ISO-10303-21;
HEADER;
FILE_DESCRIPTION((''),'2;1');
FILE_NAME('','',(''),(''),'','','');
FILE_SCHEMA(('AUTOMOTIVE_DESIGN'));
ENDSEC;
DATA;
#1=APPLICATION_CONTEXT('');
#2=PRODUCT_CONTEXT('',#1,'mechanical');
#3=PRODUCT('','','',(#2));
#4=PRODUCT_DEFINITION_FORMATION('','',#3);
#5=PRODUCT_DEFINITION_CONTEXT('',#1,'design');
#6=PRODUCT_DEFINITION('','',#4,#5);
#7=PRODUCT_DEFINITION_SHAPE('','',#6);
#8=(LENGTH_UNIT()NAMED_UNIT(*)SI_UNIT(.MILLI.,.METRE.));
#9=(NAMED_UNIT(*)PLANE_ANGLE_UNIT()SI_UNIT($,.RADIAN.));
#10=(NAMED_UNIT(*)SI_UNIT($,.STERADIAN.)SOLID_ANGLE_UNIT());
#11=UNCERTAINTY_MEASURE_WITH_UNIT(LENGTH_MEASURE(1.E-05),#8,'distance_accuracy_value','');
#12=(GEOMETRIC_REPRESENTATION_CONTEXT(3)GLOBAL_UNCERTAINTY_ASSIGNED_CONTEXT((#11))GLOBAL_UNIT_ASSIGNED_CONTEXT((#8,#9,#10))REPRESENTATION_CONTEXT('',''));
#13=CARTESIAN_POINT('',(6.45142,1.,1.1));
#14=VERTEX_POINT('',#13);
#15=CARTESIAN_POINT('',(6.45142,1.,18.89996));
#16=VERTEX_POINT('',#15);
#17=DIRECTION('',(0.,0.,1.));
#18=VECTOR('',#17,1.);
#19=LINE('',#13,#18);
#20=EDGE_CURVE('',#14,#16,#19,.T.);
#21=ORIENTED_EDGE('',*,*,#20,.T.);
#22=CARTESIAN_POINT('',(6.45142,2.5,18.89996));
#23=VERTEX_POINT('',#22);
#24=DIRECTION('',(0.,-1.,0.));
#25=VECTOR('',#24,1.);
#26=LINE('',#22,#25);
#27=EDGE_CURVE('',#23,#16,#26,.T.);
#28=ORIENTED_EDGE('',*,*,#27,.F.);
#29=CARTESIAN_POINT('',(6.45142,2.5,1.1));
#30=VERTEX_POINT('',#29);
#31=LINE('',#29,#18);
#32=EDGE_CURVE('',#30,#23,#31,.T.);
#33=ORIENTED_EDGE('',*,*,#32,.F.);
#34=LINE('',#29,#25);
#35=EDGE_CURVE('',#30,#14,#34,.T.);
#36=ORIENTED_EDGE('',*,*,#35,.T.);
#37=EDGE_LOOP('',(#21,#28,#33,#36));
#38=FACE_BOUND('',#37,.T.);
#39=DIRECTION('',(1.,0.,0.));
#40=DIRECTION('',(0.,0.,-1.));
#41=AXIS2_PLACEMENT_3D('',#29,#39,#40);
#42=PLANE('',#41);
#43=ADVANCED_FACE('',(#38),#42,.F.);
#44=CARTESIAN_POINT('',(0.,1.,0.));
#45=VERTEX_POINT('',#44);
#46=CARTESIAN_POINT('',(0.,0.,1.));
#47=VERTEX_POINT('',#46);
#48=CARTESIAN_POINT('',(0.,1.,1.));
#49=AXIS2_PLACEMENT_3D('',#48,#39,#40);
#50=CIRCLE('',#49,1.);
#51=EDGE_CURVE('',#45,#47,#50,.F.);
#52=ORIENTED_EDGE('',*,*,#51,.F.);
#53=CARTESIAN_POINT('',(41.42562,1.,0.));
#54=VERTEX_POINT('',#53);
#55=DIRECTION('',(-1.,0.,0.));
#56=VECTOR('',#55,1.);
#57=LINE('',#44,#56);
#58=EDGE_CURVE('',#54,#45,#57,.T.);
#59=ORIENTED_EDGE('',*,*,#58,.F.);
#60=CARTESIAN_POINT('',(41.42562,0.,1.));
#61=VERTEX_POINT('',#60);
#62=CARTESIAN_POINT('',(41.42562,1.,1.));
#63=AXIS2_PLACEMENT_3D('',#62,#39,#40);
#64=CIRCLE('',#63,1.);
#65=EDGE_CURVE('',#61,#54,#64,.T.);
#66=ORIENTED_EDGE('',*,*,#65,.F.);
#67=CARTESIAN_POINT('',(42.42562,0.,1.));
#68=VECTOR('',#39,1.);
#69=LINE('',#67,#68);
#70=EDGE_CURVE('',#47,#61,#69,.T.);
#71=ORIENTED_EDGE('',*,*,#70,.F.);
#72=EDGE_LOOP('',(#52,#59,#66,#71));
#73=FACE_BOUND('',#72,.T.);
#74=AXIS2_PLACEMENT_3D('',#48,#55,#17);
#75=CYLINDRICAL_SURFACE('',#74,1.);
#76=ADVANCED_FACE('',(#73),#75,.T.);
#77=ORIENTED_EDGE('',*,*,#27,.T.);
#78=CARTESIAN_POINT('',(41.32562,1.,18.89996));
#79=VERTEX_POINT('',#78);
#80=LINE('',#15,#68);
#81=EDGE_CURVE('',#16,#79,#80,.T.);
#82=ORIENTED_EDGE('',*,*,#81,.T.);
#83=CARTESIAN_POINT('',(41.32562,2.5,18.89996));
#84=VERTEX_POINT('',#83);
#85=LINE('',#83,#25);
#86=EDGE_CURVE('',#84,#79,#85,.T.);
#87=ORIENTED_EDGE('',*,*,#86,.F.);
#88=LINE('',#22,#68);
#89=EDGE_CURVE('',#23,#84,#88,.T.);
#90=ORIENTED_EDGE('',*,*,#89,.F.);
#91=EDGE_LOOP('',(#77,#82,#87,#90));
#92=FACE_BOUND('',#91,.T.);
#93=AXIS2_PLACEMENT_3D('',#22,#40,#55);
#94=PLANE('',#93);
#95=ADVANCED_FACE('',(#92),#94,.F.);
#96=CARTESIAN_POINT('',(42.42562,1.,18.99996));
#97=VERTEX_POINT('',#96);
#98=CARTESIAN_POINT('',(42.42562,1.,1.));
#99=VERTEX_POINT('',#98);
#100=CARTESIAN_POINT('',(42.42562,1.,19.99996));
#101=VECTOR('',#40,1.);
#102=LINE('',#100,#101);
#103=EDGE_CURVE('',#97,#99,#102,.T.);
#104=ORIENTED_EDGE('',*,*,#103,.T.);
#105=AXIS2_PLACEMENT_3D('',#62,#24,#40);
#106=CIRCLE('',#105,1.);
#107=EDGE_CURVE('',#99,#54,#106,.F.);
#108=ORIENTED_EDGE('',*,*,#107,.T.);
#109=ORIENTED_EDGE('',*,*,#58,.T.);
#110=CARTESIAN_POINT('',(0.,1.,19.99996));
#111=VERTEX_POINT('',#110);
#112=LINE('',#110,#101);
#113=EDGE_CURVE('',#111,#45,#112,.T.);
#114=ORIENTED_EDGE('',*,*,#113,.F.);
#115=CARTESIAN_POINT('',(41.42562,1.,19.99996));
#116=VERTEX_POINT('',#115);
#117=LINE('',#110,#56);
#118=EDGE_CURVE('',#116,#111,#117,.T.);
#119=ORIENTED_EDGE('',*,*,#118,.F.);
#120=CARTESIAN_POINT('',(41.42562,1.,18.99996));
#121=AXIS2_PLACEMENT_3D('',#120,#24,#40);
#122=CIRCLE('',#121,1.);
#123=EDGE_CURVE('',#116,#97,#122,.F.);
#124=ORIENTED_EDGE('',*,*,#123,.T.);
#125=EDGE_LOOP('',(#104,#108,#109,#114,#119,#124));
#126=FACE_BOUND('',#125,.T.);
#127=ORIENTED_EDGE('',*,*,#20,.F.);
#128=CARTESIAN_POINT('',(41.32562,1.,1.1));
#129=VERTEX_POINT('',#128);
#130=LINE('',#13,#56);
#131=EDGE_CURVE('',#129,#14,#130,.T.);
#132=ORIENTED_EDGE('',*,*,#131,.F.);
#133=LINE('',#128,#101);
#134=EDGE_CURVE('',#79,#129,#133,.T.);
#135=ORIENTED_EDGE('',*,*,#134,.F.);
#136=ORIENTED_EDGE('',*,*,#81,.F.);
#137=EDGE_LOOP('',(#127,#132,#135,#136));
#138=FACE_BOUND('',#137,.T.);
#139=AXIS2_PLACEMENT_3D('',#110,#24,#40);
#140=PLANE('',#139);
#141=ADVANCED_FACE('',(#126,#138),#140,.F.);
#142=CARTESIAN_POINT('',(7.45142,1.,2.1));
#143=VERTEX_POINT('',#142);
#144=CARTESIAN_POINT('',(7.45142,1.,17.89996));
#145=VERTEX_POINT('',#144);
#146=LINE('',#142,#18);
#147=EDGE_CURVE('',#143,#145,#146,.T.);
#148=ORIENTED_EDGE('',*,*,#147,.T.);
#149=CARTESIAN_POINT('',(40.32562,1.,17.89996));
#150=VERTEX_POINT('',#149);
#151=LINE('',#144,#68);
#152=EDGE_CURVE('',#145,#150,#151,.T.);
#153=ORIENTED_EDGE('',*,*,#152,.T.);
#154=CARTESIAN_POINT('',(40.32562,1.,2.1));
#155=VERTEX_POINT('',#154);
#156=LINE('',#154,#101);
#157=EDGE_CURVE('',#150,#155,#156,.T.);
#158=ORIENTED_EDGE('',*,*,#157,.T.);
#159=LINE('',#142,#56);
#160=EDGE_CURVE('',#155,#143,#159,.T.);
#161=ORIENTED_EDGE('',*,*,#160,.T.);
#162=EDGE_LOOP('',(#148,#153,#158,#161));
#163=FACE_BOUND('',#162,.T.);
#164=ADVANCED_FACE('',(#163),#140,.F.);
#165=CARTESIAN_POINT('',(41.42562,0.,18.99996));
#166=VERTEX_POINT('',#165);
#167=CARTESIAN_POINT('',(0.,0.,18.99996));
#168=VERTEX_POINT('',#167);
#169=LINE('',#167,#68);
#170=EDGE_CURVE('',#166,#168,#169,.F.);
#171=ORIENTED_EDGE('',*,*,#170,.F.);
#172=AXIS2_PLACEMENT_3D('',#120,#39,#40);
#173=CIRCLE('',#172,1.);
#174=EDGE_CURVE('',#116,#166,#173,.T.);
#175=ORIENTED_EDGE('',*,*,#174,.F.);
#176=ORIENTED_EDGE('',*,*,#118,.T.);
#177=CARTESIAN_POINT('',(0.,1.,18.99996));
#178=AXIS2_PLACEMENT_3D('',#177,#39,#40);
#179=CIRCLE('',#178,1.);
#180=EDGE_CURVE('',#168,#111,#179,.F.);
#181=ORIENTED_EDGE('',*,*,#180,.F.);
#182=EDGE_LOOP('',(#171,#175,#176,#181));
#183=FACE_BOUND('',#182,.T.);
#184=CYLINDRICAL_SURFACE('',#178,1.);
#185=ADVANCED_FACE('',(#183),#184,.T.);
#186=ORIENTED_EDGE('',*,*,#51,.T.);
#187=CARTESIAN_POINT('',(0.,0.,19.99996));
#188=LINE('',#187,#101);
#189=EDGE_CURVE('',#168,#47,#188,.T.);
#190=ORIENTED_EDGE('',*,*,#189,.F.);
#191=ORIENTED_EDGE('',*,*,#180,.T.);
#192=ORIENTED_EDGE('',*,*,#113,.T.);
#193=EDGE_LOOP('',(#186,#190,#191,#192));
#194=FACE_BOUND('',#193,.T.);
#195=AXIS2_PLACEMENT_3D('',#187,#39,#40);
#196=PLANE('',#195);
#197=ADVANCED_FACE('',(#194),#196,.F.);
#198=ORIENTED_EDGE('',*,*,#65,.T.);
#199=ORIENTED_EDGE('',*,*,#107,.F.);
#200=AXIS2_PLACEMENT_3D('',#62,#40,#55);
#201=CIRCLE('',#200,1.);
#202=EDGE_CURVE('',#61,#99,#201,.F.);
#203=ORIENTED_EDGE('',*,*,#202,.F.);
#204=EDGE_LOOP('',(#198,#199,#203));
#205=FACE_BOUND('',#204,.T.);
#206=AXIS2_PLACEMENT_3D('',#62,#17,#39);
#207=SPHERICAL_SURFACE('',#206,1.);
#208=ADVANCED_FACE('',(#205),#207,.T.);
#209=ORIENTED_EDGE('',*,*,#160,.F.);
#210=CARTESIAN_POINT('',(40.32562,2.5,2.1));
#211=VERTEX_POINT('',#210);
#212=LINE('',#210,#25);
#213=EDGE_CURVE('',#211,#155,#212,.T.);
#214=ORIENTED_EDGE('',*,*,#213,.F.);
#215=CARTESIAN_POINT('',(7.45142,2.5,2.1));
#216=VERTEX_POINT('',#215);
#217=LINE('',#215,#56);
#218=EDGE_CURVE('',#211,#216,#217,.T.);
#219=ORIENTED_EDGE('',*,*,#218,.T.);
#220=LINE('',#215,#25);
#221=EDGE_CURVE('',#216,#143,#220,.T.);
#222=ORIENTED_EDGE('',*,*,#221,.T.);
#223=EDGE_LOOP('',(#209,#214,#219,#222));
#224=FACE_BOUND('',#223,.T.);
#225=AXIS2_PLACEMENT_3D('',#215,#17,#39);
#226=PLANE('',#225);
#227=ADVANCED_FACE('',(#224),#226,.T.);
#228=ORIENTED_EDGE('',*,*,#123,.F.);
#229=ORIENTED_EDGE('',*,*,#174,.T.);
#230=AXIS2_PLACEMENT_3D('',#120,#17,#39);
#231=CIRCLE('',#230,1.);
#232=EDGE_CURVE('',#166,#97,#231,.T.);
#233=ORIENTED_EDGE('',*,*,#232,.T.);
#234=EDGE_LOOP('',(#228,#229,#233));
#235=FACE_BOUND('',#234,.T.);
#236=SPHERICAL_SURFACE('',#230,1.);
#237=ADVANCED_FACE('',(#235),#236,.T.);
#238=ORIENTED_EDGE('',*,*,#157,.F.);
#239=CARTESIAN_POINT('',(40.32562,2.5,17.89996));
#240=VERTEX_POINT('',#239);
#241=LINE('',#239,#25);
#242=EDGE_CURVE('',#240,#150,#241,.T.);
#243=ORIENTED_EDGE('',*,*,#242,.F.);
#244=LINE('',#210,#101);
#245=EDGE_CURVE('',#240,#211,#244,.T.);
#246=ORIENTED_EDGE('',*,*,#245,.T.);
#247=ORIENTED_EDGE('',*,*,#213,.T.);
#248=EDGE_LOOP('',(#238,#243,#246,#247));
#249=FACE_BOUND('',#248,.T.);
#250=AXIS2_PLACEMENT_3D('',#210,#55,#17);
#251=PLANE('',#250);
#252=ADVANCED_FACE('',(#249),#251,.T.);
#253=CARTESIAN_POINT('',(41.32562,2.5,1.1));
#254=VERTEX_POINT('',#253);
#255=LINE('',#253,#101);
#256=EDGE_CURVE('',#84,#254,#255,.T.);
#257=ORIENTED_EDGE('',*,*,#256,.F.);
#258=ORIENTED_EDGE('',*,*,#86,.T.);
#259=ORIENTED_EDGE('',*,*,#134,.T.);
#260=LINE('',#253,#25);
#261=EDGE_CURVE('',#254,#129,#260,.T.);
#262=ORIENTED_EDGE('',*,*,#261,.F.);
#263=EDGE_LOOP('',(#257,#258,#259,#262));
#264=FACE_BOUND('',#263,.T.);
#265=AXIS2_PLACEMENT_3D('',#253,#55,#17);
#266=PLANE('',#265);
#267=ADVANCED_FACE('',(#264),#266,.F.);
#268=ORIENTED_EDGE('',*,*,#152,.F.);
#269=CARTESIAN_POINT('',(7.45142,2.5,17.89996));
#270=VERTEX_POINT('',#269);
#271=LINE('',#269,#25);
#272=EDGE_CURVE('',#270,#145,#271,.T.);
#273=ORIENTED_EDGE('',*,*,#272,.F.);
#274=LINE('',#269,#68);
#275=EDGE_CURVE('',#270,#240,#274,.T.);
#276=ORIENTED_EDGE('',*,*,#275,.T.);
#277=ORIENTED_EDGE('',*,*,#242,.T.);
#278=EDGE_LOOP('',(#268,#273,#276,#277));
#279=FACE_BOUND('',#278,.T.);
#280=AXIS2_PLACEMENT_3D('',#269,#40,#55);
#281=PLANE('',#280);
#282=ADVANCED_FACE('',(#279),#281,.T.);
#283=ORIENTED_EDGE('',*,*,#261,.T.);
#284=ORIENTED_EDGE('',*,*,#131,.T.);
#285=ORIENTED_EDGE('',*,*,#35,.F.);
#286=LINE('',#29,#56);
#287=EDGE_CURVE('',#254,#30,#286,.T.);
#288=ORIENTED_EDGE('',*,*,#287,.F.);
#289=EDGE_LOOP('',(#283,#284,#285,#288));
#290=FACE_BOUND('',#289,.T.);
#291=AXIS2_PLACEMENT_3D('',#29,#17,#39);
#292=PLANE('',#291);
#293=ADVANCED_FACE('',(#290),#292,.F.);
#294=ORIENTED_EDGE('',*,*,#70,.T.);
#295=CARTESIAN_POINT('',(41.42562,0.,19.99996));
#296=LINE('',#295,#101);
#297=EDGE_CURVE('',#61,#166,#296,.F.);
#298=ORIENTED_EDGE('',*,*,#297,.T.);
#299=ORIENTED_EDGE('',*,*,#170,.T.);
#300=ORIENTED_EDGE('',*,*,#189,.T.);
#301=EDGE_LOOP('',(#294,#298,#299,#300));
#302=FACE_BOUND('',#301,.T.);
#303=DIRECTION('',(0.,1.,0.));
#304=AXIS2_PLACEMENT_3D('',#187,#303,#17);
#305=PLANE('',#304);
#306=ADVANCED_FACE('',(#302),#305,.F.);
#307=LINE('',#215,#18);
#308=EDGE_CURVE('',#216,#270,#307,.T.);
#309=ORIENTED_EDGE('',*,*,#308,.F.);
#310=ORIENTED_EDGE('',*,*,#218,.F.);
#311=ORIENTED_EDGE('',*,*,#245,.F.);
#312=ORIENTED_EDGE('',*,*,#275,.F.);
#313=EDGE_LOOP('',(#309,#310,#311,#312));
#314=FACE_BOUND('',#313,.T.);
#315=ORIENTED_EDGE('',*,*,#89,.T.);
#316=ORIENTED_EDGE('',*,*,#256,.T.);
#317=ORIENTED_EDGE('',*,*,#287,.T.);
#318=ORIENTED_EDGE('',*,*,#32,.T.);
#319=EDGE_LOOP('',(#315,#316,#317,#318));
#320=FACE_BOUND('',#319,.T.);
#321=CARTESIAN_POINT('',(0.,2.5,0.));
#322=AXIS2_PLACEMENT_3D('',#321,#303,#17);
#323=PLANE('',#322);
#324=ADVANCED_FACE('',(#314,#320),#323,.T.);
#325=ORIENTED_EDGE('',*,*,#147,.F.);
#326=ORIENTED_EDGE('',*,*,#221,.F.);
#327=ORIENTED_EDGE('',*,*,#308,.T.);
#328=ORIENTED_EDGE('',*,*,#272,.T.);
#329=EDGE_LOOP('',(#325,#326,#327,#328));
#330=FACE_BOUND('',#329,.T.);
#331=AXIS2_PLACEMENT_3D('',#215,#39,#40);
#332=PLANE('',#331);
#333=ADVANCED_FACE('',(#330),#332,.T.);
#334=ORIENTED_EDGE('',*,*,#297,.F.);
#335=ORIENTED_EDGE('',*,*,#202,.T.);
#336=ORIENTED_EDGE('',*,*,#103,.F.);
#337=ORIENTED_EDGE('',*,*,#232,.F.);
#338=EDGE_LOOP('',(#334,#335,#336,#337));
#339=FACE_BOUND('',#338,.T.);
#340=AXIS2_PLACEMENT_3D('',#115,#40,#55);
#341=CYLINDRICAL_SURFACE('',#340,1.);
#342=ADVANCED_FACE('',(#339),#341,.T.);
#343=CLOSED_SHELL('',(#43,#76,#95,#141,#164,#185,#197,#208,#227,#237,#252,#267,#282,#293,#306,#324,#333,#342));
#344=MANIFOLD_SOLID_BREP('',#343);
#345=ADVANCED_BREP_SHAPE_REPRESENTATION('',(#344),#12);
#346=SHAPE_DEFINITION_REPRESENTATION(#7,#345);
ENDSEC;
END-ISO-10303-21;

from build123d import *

# Parameters (mm, degrees)
SKETCH1_W           = 42.42562
SKETCH1_H           = 1
BOSS_EXTRUDE1_DEPTH = 19.99996
FILLET1_R           = 1
SKETCH2_W           = 34.8742
SKETCH2_H           = 17.79996
SKETCH2_W_2         = 32.8742
SKETCH2_H_2         = 15.79996
BOSS_EXTRUDE2_DEPTH = 1.5


with BuildPart() as part:
    # Sketch1 → Boss-Extrude1 (new body)
    with BuildSketch(Plane.XY):
        with Locations((21.21281, 0.5)):
            Rectangle(SKETCH1_W, SKETCH1_H)
    extrude(amount=BOSS_EXTRUDE1_DEPTH)

    # Fillet1
    # the kernel refuses this fillet: 1 mm, written as the material it takes off along each edge
    with BuildSketch(Plane(origin=(41.42562, 1, 18.99996), x_dir=(1, 0, 0), z_dir=(0, -1, 0))) as fillet1_piece_1_section:
        Polygon((0, 0), (FILLET1_R * 1.02, 0), (FILLET1_R * 1.02, FILLET1_R * 1.02), (0, FILLET1_R * 1.02), align=None)
    fillet1_piece_1 = extrude(amount=FILLET1_R * 1.02, mode=Mode.PRIVATE)
    fillet1_piece_1 = fillet1_piece_1 - Plane(origin=(41.42562, 1, 18.99996), x_dir=(-0.7071067811865475, 0, -0.7071067811865475), z_dir=(0, -1, 0)) * Sphere(FILLET1_R, mode=Mode.PRIVATE)
    add(fillet1_piece_1, mode=Mode.SUBTRACT)
    with BuildSketch(Plane(origin=(41.42562, 1, 1), x_dir=(1, 0, 0), z_dir=(0, -1, 0))) as fillet1_piece_2_section:
        Polygon((0, 0), (FILLET1_R * 1.02, 0), (FILLET1_R * 1.02, -FILLET1_R * 1.02), (0, -FILLET1_R * 1.02), align=None)
    fillet1_piece_2 = extrude(amount=FILLET1_R * 1.02, mode=Mode.PRIVATE)
    fillet1_piece_2 = fillet1_piece_2 - Plane(origin=(41.42562, 1, 1), x_dir=(-0.7071067811865475, 0, 0.7071067811865475), z_dir=(0, -1, 0)) * Sphere(FILLET1_R, mode=Mode.PRIVATE)
    add(fillet1_piece_2, mode=Mode.SUBTRACT)
    with BuildSketch(Plane(origin=(-2.5, 0, 0), x_dir=(0, 0, 1), z_dir=(1, 0, 0))) as fillet1_piece_3:
        with BuildLine():
            CenterArc((FILLET1_R, -FILLET1_R), FILLET1_R, 90, 90)
            Line((0, -FILLET1_R), (0, 0))
            Line((0, 0), (FILLET1_R, 0))
        make_face()
    extrude(amount=43.92562, mode=Mode.SUBTRACT)
    with BuildSketch(Plane(origin=(-2.5, 0, 19.99996), x_dir=(0, 0, -1), z_dir=(1, 0, 0))) as fillet1_piece_4:
        with BuildLine():
            CenterArc((FILLET1_R, FILLET1_R), FILLET1_R, 180, 90)
            Line((0, FILLET1_R), (0, 0))
            Line((0, 0), (FILLET1_R, 0))
        make_face()
    extrude(amount=43.92562, mode=Mode.SUBTRACT)
    with BuildSketch(Plane(origin=(42.42562, 0, 1), x_dir=(-1, 0, 0), z_dir=(0, 0, 1))) as fillet1_piece_5:
        with BuildLine():
            CenterArc((FILLET1_R, -FILLET1_R), FILLET1_R, 90, 90)
            Line((0, -FILLET1_R), (0, 0))
            Line((0, 0), (FILLET1_R, 0))
        make_face()
    extrude(amount=17.99996, mode=Mode.SUBTRACT)

    # Sketch2 → Boss-Extrude2 (add)
    with BuildSketch(Plane(origin=(0, 1, 0), x_dir=(1, 0, 0), z_dir=(0, 1, 0))):
        with Locations((23.88852, -9.99998)):
            Rectangle(SKETCH2_W, SKETCH2_H)
        with Locations((23.88852, -9.99998)):
            Rectangle(SKETCH2_W_2, SKETCH2_H_2, mode=Mode.SUBTRACT)
    extrude(amount=BOSS_EXTRUDE2_DEPTH)


solid = part.part
